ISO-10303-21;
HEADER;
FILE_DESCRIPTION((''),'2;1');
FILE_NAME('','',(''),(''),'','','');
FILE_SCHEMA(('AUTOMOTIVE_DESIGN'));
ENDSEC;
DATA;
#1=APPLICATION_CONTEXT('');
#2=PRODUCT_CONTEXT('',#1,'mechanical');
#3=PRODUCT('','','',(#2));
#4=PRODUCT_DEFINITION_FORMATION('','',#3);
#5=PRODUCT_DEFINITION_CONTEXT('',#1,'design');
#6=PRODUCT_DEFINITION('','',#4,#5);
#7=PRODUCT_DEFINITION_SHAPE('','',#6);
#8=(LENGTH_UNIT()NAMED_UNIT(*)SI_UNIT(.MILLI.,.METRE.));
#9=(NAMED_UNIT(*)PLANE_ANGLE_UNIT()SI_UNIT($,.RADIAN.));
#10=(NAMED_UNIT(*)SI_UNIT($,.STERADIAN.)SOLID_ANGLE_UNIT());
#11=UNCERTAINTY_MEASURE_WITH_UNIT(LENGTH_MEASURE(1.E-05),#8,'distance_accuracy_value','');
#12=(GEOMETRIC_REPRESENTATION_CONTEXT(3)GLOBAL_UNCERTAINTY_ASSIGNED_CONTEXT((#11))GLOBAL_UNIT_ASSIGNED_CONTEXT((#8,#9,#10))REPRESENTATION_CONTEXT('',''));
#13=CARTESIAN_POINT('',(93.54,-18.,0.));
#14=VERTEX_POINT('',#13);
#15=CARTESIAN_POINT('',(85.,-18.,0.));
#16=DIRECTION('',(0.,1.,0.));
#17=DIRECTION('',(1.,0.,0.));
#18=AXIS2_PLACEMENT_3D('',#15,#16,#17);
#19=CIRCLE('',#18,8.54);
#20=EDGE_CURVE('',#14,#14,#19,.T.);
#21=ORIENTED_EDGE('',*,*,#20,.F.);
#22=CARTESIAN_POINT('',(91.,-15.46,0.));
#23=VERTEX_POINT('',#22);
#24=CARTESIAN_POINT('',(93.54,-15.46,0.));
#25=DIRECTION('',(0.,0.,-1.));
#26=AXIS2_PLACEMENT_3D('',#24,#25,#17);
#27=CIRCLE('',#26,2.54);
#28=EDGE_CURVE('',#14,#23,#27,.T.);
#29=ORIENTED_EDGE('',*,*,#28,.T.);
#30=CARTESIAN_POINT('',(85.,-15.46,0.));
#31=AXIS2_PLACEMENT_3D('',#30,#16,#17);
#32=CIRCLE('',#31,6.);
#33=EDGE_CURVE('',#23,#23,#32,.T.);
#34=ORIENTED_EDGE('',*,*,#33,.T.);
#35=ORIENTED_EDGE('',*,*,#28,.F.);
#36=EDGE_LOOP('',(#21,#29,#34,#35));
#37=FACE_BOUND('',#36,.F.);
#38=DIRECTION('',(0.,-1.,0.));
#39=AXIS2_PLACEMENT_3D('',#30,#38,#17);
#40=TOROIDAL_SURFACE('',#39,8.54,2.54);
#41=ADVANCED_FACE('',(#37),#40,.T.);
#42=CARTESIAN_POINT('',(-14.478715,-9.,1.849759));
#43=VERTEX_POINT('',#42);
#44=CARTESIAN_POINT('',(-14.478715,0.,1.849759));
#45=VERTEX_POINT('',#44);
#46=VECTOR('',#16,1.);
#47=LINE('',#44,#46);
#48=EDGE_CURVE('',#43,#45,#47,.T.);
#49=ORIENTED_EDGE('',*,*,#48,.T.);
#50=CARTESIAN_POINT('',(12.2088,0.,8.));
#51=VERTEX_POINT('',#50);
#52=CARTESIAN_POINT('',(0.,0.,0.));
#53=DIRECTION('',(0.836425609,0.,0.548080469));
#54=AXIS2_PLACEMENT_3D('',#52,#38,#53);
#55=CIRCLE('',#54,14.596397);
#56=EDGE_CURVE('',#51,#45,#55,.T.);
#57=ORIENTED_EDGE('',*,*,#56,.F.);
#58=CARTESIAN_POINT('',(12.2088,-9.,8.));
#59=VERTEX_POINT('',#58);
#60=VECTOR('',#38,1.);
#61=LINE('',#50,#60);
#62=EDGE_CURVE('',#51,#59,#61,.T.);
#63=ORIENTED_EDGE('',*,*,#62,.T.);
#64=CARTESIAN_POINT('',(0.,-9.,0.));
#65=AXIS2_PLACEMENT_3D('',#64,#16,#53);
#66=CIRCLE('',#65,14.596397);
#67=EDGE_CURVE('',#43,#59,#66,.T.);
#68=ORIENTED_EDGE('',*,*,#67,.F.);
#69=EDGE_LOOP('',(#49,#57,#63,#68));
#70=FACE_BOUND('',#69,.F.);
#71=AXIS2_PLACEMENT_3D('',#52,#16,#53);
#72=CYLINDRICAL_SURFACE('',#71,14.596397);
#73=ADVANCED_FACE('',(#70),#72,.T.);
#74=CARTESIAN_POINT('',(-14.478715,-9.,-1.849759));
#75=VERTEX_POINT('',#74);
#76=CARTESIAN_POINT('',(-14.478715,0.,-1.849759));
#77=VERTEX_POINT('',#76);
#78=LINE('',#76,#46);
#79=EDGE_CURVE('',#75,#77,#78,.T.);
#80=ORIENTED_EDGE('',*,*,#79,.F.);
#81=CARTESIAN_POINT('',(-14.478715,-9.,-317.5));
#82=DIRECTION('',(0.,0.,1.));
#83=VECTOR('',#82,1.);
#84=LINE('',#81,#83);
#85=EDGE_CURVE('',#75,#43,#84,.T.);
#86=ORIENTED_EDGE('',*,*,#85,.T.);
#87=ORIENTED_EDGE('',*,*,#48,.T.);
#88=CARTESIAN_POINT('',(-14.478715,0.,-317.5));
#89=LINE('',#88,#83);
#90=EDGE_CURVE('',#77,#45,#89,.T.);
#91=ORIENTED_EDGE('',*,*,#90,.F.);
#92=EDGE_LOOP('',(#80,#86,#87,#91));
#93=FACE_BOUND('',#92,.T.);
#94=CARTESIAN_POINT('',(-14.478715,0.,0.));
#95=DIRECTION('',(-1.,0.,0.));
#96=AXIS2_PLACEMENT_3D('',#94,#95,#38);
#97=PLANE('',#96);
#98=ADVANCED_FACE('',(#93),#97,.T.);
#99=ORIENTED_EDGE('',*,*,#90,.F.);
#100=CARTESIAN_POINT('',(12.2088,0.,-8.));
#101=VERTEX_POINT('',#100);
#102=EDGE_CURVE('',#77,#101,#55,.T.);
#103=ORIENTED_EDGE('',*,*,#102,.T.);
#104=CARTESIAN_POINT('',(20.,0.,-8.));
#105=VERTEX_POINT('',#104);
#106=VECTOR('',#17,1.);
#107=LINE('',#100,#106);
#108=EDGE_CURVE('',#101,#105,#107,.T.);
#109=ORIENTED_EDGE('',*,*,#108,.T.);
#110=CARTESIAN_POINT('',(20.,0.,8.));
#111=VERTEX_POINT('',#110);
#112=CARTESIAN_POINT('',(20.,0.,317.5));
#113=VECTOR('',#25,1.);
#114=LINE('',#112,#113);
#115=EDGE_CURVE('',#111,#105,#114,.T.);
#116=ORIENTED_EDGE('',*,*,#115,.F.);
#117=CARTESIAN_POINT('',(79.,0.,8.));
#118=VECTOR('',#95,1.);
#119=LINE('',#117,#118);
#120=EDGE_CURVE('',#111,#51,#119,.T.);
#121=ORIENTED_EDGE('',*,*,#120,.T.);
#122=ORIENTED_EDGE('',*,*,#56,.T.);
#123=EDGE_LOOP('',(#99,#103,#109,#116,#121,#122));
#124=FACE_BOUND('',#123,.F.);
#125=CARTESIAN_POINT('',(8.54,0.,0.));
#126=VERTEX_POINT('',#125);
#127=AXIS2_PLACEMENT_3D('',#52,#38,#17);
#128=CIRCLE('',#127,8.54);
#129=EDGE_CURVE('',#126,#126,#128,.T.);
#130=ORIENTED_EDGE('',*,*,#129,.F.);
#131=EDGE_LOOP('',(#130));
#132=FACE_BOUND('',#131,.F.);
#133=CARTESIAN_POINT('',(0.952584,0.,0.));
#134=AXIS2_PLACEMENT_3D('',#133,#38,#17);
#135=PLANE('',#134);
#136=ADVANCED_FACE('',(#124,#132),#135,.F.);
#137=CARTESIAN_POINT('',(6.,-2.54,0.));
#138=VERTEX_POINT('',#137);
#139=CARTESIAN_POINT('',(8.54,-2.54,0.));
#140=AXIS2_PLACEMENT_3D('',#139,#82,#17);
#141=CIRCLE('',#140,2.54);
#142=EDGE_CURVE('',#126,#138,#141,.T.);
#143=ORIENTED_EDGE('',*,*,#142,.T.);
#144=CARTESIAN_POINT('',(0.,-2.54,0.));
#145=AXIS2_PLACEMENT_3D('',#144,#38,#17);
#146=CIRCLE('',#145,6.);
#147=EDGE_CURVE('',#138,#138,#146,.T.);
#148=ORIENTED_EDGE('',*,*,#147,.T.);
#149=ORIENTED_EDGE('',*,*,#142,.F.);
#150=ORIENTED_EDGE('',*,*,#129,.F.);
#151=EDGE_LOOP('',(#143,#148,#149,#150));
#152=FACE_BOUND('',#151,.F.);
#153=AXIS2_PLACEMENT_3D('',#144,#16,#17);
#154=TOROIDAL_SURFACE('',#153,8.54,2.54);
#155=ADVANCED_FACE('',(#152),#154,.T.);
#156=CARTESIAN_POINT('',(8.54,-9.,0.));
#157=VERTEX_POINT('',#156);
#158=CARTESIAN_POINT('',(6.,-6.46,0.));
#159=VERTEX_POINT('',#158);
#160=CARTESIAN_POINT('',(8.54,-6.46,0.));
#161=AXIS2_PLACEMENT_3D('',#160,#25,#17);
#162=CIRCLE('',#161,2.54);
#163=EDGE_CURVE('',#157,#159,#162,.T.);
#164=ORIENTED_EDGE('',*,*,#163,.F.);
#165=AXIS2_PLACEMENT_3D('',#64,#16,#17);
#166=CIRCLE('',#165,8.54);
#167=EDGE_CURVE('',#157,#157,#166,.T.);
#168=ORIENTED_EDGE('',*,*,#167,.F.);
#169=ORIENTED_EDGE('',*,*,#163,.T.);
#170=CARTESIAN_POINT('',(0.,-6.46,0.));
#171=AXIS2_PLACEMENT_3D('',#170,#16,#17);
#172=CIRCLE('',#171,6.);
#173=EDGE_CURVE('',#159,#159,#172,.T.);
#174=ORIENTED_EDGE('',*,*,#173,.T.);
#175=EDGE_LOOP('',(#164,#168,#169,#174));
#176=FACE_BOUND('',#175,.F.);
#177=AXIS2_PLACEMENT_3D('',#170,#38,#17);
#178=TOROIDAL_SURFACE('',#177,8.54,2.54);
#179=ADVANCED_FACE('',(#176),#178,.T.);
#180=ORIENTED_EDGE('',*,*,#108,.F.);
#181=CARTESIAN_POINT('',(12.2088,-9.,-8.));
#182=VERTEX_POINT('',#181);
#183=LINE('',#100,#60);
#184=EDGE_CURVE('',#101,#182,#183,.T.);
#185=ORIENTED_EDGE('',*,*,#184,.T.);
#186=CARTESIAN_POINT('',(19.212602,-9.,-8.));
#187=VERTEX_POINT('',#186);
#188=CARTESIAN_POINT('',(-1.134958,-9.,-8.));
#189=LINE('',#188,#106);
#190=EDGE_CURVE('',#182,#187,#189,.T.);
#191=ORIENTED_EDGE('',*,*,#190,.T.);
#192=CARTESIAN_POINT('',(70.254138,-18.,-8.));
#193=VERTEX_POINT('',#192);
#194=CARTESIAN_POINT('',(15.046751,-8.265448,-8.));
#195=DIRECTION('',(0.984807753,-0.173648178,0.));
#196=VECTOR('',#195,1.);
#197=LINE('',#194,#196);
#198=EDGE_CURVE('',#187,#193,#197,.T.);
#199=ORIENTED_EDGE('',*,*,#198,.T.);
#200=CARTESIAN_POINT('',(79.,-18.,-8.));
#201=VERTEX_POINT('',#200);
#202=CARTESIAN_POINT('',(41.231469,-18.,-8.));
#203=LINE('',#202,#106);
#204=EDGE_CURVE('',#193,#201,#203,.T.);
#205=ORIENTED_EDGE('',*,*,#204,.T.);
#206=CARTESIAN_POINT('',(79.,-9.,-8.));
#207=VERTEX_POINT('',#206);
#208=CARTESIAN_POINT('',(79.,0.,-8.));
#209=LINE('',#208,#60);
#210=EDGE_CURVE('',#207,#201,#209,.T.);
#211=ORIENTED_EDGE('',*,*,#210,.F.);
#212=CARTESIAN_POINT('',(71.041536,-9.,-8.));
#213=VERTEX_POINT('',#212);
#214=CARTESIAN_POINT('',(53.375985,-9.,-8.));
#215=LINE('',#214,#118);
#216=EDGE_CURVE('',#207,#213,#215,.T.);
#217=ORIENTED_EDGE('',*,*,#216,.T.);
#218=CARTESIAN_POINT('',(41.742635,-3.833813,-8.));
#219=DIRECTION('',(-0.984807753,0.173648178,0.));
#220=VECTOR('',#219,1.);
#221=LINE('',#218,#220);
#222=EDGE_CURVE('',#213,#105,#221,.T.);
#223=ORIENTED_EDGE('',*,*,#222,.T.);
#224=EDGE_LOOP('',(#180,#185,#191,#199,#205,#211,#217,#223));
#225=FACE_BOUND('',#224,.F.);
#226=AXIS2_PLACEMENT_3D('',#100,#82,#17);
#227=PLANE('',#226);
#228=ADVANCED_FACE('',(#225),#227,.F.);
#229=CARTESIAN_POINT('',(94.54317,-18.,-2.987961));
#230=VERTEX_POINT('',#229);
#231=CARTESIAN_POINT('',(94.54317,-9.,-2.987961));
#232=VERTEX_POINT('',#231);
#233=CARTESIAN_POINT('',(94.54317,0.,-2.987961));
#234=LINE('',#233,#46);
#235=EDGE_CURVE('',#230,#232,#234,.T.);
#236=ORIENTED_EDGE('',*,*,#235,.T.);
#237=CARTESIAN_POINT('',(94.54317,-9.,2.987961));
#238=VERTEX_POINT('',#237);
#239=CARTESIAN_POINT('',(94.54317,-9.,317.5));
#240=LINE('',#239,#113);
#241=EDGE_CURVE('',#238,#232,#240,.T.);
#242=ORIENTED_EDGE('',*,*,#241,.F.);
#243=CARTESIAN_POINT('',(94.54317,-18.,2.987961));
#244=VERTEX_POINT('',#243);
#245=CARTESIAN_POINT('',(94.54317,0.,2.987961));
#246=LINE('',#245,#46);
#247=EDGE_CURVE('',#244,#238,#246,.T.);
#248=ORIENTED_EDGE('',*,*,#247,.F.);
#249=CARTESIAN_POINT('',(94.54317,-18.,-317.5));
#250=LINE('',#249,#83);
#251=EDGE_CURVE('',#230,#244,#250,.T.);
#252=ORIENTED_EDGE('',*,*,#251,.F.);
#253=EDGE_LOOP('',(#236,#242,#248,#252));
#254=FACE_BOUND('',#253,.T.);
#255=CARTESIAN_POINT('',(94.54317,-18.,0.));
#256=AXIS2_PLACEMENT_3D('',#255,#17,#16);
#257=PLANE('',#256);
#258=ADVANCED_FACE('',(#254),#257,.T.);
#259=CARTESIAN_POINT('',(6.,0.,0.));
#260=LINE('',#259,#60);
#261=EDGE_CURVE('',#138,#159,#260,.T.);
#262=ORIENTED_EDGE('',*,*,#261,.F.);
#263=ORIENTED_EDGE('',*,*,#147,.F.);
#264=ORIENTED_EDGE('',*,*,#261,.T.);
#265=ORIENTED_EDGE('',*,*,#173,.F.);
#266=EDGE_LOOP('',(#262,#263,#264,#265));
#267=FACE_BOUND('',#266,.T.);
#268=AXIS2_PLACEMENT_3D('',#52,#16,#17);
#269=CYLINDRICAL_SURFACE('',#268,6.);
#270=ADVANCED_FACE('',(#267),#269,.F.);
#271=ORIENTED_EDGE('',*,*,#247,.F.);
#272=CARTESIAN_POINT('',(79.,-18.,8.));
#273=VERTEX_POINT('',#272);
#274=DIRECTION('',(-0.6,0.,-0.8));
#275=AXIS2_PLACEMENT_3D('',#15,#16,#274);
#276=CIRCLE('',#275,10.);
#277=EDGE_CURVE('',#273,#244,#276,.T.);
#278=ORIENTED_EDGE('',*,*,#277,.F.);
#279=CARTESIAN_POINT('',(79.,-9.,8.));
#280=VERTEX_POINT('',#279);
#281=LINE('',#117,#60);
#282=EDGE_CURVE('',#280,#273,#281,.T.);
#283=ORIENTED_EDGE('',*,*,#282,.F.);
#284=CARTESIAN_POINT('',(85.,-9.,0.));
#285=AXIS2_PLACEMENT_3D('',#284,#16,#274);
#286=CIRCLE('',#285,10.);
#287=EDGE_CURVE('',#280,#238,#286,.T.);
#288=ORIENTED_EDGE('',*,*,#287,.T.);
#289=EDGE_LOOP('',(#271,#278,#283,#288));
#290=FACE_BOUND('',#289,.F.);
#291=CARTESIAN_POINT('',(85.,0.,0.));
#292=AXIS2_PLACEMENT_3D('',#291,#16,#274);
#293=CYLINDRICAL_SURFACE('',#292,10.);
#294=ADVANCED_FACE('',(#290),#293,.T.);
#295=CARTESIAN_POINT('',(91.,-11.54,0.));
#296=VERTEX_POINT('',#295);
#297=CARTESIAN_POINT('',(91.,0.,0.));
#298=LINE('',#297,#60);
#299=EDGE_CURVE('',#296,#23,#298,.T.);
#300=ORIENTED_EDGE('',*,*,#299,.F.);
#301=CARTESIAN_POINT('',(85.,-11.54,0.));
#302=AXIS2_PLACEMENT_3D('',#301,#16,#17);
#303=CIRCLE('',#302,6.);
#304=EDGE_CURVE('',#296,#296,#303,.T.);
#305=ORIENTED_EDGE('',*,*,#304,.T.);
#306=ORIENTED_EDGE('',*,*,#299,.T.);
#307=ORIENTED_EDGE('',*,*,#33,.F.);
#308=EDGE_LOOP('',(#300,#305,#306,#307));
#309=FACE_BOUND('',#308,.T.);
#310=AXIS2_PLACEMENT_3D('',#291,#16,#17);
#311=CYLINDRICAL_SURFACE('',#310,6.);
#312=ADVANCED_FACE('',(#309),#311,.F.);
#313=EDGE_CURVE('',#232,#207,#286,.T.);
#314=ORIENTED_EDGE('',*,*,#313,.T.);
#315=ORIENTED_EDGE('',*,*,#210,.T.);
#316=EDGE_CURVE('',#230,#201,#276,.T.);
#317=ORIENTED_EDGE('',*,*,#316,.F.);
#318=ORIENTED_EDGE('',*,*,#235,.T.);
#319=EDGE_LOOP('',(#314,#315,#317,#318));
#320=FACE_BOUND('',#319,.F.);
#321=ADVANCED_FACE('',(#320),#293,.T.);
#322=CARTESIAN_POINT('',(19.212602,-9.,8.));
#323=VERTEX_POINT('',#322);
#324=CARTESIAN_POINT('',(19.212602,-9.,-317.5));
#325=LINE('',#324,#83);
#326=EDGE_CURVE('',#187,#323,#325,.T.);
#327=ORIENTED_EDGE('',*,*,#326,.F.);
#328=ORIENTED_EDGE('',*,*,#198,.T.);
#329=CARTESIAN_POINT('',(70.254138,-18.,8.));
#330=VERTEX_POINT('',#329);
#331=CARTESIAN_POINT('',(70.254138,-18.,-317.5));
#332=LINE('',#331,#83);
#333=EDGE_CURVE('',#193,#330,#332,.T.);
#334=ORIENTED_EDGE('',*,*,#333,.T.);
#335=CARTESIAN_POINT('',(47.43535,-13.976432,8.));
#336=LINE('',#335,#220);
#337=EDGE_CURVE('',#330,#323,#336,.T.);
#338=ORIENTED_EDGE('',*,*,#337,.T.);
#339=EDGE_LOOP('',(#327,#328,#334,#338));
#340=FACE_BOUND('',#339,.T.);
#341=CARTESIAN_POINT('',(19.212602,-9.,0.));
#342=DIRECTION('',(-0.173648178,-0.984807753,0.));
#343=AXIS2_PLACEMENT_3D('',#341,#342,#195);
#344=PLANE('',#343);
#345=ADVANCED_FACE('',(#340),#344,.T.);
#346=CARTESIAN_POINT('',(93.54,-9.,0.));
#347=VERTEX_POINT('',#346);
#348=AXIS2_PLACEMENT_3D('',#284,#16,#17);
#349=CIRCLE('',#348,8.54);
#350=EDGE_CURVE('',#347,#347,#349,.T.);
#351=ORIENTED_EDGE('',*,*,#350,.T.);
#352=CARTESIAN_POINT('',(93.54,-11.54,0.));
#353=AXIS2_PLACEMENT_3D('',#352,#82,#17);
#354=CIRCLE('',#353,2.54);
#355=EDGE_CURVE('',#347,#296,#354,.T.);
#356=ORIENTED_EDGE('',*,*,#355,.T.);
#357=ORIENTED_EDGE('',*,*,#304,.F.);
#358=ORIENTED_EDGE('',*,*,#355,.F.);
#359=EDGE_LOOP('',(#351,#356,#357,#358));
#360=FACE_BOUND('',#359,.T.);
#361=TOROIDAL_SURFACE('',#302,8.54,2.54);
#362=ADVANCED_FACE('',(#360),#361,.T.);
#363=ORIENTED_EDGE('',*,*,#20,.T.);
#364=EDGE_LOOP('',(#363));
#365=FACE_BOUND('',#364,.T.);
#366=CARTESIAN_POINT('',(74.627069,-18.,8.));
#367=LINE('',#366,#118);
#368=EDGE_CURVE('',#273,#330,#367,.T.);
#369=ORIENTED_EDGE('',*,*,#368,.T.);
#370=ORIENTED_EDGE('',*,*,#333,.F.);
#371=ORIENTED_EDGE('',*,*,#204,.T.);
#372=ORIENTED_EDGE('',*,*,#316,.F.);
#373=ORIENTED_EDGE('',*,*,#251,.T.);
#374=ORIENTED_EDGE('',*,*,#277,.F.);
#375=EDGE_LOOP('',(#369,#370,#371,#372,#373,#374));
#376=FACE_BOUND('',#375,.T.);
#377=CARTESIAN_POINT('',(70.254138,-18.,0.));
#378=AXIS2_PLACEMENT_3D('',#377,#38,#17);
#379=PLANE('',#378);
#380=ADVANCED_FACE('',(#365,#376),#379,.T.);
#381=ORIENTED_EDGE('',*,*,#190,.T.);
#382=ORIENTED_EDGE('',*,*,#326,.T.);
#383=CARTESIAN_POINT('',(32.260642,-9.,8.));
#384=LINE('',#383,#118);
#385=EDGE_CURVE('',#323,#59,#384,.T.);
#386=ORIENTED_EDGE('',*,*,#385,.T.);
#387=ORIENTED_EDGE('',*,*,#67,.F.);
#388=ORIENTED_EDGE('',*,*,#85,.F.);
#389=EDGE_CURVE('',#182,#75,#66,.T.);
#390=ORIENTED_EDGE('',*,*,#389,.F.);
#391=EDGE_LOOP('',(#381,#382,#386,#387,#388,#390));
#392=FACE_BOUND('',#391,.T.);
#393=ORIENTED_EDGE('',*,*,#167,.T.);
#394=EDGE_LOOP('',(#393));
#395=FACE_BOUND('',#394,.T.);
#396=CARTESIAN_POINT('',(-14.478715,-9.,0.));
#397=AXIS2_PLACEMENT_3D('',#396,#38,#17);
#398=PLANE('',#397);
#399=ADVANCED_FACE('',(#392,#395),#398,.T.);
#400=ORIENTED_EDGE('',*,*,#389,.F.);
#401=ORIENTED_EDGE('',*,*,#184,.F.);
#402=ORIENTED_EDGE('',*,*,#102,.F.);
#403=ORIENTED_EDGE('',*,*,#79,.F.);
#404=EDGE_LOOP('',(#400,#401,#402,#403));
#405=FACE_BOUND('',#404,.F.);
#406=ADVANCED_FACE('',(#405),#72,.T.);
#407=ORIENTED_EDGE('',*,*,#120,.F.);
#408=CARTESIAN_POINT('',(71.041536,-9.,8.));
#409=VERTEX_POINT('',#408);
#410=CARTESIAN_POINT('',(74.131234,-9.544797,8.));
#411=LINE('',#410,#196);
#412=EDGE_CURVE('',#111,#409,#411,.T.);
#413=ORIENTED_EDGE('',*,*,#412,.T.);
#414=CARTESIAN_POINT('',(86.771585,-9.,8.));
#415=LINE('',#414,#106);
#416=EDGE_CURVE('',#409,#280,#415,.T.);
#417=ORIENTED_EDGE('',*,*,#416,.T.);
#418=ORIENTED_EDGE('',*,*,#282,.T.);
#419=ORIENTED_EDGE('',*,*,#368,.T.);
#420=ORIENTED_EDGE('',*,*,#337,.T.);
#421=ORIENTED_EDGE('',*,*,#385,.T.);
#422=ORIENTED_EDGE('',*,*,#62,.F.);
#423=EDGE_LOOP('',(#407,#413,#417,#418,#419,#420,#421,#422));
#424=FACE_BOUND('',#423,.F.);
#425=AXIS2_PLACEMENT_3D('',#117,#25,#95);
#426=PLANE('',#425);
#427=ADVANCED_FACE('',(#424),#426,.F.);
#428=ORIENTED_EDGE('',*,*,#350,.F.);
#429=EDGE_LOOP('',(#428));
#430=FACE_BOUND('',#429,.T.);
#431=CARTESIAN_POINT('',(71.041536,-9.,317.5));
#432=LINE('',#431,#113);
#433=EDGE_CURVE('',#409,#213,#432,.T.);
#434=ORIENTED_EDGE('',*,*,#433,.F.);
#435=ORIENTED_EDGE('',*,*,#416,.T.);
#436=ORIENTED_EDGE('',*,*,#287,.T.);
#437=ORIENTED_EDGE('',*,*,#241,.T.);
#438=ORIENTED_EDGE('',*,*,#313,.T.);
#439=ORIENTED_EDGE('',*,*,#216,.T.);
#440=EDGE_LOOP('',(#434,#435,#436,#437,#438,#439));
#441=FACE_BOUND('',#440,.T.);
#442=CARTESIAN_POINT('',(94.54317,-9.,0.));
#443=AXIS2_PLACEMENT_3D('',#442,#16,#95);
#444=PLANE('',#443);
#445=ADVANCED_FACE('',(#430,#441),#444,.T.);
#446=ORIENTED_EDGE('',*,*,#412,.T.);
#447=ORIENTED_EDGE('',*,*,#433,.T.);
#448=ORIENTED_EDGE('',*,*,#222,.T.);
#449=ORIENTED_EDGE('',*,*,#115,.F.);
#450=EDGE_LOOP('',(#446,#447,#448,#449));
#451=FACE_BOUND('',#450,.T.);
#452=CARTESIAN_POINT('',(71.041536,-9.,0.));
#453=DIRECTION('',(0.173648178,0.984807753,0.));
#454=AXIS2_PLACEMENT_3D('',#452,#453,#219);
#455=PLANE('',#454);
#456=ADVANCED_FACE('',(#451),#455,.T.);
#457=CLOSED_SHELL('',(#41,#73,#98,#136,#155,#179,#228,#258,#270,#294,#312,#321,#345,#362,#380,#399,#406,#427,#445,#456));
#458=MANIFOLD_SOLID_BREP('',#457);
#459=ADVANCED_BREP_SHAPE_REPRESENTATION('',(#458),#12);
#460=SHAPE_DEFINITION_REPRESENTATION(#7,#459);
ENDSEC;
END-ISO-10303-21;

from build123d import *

# Parameters (mm, degrees)
F0_R     = 6
F1_DEPTH = 25
F3_DEPTH = 317.5
F4_R     = 2.54


with BuildPart() as f1:
    # F0 (on Front) → F1 (new body)
    with BuildSketch(Plane.XZ):
        with BuildLine():
            ThreePointArc((12.2088000741, -8), (13.9867667719, -4.1743448012), (14.59639679, 0))
            ThreePointArc((14.59639679, 0), (13.9867667719, 4.1743448012), (12.2088000741, 8))
            ThreePointArc((12.2088000741, 8), (-14.59639679, 0), (12.2088000741, -8))
        make_face()
        Circle(F0_R, mode=Mode.SUBTRACT)
        with BuildLine():
            ThreePointArc((12.2088000741, 8), (13.9867667719, 4.1743448012), (14.59639679, 0))
            ThreePointArc((14.59639679, 0), (13.9867667719, -4.1743448012), (12.2088000741, -8))
            Line((12.2088000741, -8), (79, -8))
            ThreePointArc((79, -8), (75, 0), (79, 8))
            Line((79, 8), (12.2088000741, 8))
        make_face()
        with BuildLine():
            ThreePointArc((95, 0), (89.472135955, 8.94427191), (79, 8))
            ThreePointArc((79, 8), (75, 0), (79, -8))
            ThreePointArc((79, -8), (89.472135955, -8.94427191), (95, 0))
        make_face()
        with Locations((85, 0)):
            Circle(F0_R, mode=Mode.SUBTRACT)
    extrude(amount=F1_DEPTH)

    # F2 (on Top) → F3 (intersect, symmetric)
    with BuildSketch(Plane.XY):
        Polygon((20, 0), (-14.4787151366, 0), (-14.4787151366, -9), (19.2126020283, -9), (70.2541384048, -18), (94.5431698973, -18), (94.5431698973, -9), (71.0415363766, -9), align=None)
    extrude(amount=F3_DEPTH, both=True, mode=Mode.INTERSECT)

    # F4
    f4_edges = [f1.edges().sort_by_distance(p)[0] for p in [
        (-6, -9, 0),
        (79, -18, 0),
        (-6, 0, 0),
        (79, -9, 0),
    ]]
    fillet(f4_edges, radius=F4_R)


solid = f1.part
